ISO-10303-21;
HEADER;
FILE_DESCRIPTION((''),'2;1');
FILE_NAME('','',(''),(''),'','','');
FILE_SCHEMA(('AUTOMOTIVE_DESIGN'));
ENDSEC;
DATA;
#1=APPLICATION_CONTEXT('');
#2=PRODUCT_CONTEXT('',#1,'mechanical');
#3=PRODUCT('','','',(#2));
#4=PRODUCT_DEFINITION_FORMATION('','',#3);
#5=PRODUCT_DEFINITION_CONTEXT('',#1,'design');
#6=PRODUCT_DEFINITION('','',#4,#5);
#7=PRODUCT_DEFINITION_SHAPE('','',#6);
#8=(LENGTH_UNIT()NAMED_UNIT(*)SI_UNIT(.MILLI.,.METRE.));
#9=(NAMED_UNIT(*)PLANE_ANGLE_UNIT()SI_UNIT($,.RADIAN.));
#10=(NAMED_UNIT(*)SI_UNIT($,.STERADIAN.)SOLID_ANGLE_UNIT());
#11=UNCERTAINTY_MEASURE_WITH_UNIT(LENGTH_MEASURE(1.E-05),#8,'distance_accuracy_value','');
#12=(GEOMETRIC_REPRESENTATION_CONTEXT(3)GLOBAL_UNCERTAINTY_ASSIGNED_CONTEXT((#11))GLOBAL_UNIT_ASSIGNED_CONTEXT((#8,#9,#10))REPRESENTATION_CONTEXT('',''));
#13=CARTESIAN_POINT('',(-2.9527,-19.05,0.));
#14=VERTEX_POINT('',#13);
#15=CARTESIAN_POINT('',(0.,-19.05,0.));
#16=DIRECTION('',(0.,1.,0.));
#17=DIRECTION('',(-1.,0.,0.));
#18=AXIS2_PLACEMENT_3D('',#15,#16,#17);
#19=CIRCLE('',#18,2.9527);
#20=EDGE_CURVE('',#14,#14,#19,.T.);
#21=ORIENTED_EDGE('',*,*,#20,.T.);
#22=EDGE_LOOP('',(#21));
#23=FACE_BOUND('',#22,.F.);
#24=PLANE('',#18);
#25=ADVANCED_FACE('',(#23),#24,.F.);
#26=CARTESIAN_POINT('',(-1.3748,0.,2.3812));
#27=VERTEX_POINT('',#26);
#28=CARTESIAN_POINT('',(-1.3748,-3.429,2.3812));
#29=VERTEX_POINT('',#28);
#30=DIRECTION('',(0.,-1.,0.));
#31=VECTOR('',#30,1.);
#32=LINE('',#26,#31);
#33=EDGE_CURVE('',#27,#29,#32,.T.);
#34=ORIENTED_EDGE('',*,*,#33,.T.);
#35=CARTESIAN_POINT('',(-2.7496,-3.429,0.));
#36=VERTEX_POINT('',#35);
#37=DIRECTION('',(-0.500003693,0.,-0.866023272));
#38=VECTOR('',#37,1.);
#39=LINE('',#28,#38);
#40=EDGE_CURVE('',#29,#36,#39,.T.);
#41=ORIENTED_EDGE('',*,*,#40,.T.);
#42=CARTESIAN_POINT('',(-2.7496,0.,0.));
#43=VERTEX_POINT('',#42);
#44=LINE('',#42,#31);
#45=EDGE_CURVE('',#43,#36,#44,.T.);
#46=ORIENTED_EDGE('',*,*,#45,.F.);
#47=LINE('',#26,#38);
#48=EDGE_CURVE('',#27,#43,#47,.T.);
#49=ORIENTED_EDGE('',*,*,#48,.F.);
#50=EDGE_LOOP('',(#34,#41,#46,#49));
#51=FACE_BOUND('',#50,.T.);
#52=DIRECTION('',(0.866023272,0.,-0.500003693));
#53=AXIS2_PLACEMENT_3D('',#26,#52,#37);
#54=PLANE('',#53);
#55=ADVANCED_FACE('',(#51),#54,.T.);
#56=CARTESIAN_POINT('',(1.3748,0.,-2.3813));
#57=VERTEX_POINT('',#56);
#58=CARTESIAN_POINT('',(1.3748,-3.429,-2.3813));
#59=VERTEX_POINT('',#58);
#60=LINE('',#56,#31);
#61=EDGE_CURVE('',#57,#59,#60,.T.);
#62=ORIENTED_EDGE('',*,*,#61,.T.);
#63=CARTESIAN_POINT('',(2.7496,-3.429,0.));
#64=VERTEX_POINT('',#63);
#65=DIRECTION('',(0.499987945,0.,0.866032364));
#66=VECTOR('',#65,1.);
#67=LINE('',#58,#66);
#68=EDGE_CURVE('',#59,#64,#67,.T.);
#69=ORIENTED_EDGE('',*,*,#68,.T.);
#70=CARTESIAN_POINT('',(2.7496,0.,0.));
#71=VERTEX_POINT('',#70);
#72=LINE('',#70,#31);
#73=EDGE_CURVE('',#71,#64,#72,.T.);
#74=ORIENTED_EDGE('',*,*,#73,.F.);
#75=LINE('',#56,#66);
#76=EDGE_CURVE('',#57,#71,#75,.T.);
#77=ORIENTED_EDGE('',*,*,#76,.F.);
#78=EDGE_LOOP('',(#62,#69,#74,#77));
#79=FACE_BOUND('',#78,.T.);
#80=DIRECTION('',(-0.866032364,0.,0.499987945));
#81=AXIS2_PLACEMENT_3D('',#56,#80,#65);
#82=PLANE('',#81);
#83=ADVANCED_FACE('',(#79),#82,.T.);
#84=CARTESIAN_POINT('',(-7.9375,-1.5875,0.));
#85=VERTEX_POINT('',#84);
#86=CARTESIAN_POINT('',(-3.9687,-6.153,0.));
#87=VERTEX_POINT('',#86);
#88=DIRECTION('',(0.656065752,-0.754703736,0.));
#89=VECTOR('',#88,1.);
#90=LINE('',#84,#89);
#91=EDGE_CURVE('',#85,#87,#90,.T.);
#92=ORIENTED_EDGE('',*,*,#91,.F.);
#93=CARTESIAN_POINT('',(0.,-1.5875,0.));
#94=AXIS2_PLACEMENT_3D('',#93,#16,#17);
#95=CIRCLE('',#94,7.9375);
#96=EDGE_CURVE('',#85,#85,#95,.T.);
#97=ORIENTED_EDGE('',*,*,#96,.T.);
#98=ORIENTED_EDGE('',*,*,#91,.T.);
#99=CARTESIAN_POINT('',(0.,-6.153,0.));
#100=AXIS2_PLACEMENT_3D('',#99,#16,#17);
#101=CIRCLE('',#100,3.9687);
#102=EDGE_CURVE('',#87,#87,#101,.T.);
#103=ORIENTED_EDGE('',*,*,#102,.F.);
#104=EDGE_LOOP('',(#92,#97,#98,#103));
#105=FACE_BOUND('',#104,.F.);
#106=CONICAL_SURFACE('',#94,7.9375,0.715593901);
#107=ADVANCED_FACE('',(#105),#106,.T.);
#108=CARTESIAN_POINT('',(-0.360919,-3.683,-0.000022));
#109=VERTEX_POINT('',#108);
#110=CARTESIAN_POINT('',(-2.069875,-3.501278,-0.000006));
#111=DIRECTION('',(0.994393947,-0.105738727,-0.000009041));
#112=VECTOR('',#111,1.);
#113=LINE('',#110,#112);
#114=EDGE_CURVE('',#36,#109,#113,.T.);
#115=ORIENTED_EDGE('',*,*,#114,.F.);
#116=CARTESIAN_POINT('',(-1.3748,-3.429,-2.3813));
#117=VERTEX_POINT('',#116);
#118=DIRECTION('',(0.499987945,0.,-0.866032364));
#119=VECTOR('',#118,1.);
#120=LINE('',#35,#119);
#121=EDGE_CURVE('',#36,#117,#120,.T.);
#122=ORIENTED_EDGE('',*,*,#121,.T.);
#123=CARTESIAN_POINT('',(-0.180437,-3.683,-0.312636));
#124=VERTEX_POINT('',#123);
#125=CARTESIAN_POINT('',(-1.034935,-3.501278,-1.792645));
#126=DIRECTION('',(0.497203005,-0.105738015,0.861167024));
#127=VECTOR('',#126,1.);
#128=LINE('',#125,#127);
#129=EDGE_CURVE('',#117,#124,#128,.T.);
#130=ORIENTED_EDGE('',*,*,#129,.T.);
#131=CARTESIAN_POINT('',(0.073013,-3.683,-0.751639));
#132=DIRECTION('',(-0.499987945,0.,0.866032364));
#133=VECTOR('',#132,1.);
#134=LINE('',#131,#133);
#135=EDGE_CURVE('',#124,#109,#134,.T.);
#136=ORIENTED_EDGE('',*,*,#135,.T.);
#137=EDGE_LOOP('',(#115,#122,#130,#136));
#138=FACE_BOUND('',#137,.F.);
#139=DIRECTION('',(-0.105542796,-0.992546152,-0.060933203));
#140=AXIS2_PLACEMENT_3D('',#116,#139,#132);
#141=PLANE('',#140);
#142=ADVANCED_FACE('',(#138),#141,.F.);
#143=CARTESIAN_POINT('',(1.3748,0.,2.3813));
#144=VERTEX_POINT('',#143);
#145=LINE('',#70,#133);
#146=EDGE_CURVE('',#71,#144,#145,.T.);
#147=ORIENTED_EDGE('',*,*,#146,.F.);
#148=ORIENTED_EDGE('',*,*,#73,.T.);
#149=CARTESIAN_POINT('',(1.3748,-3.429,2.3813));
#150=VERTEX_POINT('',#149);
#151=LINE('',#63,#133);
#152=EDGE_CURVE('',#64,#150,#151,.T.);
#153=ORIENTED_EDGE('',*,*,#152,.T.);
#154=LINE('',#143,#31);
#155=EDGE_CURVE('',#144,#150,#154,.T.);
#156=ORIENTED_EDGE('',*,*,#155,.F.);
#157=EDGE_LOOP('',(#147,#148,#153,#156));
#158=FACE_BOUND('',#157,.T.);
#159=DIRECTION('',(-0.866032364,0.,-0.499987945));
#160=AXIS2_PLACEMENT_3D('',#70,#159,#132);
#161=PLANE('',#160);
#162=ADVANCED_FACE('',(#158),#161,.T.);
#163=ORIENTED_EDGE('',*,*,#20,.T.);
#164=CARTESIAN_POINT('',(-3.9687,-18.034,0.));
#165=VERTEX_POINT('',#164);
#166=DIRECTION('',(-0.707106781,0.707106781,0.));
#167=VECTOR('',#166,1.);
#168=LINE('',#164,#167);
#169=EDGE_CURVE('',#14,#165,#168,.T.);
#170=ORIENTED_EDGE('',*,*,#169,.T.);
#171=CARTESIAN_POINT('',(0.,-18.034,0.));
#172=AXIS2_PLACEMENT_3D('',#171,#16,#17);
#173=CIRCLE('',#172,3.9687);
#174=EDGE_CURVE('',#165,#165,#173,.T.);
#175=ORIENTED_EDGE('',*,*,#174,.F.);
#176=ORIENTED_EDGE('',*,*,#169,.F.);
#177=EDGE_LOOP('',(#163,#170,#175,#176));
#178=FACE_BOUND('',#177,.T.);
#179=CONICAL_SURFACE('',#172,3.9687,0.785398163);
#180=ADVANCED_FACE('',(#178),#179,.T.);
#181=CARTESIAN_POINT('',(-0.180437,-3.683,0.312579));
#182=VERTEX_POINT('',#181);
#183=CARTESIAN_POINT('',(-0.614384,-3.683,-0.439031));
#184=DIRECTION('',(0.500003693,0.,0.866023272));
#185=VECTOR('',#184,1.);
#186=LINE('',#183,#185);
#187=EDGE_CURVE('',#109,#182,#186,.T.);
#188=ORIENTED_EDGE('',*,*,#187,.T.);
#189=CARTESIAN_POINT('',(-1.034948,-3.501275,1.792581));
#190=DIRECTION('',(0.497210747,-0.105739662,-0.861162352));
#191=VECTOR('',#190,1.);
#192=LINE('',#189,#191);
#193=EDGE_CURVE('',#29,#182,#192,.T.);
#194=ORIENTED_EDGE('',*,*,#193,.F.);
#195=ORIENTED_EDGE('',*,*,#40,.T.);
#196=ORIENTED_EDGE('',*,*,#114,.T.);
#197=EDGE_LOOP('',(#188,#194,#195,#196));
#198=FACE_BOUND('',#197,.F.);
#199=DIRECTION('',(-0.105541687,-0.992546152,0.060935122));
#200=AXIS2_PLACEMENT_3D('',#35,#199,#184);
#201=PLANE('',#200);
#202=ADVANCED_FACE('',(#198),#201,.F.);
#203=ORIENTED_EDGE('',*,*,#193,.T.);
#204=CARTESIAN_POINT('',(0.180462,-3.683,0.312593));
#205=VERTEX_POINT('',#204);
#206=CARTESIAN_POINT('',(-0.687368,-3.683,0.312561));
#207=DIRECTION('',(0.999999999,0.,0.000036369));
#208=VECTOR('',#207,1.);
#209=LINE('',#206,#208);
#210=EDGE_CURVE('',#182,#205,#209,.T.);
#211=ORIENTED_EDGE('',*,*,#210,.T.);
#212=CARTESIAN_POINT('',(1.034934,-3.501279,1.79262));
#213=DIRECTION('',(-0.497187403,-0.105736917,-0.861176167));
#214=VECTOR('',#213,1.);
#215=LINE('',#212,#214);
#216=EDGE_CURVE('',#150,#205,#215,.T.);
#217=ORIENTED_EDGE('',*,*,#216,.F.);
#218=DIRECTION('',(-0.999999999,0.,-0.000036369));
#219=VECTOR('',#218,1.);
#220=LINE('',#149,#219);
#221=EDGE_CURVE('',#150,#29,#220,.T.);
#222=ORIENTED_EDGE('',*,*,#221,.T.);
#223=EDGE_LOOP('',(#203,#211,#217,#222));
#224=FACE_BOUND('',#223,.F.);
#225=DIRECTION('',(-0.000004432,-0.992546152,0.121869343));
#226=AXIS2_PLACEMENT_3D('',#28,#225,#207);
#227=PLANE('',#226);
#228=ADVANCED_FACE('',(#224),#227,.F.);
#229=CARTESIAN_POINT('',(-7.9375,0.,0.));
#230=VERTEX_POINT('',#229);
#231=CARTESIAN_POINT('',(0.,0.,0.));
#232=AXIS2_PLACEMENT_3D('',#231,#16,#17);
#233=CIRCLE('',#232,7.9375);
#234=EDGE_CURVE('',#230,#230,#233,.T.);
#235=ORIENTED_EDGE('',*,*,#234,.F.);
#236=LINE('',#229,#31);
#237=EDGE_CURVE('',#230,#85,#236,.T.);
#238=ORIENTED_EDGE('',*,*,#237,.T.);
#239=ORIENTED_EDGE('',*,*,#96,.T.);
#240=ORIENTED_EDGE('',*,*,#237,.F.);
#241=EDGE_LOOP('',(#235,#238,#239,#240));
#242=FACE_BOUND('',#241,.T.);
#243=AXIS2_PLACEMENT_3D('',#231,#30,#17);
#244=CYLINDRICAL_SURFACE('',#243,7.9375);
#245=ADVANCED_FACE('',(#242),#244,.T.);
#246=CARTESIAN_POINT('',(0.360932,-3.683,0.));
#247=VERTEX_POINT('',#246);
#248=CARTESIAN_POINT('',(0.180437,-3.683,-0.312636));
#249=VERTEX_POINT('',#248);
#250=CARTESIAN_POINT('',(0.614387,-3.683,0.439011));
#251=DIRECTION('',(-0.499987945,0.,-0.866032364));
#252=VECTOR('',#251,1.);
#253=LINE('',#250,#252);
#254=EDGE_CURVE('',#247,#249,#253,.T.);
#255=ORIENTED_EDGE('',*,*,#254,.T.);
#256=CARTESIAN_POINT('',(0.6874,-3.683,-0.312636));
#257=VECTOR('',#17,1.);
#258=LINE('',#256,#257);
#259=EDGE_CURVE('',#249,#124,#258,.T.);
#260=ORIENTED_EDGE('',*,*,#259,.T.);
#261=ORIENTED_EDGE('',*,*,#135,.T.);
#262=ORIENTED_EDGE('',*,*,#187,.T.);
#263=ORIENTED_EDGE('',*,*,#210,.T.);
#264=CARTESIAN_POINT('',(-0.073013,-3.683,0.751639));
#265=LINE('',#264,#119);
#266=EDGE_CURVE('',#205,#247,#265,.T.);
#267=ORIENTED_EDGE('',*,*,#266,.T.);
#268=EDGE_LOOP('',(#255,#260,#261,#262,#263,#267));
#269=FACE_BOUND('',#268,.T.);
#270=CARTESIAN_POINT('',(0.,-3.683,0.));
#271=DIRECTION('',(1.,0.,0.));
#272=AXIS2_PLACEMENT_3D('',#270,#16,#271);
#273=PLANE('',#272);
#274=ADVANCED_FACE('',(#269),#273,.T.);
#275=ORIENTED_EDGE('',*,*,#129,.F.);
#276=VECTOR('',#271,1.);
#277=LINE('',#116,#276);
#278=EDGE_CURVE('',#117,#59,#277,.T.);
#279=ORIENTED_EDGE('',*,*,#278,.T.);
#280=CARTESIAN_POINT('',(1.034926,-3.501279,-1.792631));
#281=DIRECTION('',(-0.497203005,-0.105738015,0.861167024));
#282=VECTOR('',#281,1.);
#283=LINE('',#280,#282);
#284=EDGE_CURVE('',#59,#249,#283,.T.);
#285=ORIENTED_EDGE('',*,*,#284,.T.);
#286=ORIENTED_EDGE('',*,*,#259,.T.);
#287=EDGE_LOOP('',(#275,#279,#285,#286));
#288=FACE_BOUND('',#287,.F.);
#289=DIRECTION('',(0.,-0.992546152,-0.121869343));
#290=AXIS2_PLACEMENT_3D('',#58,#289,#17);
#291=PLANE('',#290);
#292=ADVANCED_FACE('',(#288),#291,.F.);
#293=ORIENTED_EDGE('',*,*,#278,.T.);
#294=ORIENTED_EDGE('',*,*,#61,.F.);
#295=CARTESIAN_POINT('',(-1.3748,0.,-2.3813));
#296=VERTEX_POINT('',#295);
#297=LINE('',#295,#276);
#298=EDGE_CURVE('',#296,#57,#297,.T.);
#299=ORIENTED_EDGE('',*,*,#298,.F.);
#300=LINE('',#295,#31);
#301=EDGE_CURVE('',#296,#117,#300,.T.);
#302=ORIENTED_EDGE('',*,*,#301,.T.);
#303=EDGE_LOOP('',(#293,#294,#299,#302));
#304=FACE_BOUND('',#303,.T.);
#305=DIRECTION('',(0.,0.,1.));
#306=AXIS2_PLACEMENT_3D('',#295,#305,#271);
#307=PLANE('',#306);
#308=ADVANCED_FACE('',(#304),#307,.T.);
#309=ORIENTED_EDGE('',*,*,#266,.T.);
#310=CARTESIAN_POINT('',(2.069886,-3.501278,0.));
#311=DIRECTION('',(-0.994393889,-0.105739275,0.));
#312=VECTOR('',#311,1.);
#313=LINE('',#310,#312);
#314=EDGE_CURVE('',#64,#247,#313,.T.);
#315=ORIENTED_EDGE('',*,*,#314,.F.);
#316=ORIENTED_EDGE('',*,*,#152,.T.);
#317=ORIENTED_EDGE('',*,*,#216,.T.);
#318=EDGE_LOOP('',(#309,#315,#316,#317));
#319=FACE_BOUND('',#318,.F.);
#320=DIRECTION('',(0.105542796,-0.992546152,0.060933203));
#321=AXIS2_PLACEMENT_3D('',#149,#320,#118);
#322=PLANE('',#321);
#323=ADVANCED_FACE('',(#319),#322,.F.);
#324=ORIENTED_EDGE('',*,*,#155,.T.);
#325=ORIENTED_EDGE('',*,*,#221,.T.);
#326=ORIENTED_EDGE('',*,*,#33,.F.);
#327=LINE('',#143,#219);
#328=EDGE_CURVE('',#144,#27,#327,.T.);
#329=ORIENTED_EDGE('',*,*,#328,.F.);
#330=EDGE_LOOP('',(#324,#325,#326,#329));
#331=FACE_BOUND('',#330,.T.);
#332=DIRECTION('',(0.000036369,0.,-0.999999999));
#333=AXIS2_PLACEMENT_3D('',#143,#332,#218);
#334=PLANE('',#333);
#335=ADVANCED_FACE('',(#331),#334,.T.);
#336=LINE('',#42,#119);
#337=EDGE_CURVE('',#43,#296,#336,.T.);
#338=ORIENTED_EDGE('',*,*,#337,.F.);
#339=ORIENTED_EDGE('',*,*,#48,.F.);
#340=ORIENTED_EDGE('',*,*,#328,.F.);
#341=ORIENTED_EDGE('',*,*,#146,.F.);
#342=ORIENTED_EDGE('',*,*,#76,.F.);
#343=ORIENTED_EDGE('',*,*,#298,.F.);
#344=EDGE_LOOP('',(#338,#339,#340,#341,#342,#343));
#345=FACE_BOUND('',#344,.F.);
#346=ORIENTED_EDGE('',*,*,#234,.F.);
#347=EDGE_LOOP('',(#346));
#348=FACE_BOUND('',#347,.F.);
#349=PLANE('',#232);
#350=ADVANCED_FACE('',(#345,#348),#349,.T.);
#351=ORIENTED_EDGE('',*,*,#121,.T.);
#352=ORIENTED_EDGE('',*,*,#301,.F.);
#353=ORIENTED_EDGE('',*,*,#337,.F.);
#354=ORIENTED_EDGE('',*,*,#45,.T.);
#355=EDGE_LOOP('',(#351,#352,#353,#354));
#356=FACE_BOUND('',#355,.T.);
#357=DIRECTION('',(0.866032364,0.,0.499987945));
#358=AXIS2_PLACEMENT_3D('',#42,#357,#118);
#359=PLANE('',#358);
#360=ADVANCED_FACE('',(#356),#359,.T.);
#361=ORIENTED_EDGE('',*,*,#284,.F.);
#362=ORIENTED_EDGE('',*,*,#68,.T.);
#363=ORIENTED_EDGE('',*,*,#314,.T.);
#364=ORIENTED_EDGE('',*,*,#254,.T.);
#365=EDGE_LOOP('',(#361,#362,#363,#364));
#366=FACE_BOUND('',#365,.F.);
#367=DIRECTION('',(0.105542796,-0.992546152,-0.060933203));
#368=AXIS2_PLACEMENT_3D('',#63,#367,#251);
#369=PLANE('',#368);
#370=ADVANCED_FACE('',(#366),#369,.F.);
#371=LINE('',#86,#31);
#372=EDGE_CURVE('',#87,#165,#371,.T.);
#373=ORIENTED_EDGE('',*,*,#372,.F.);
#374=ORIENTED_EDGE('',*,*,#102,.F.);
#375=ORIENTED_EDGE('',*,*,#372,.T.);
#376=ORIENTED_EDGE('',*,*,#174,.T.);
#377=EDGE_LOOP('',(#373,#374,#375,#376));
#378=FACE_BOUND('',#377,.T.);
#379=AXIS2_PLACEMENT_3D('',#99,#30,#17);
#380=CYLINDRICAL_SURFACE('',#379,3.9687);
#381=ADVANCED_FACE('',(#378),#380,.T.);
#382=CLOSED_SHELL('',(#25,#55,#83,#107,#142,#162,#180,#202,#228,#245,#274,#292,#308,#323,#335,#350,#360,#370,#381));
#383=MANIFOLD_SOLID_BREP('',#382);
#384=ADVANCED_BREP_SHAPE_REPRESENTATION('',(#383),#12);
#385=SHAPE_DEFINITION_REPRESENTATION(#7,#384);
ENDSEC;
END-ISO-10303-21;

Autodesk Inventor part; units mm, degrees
ref_plane "YZ Plane" through (0, 0, 0) normal (1, 0, 0) x (0, 1, 0)
ref_plane "XZ Plane" through (0, 0, 0) normal (0, 1, 0) x (-1, 0, 0)
ref_plane "XY Plane" through (0, 0, 0) normal (0, 0, 1) x (1, 0, 0)
sketch "Sketch1" plane through (0, 0, 0) normal (0, 0, 1) x (1, 0, 0)
  line L0 (0, 0) -> (-7.9375, 0)
  line L1 (-7.9375, 0) -> (-7.9375, -1.5875)
  line L2 (-7.9375, -1.5875) -> (-3.9687, -6.153)
  line L3 (-3.9687, -6.153) -> (-3.9687, -19.05)
  line L4 (-3.9687, -19.05) -> (0, -19.05)
  line L5 (0, -19.05) -> (0, 0)
  dimension "d0" = 15.875
  dimension "d1" = 1.5875
  dimension "d2" = 19.05
  dimension "d3" = 7.9375
  dimension "d16" = 41
revolve "Revolution1" add sketch "Sketch1" angle 360 about axis through (0, -19.05, 0) along (0, 1, 0)
chamfer "Chamfer1" distance 1.016 angle 45 1 edges at (3.9688, -19.05, 0)
thread "Thread1" size "5/16-18 UNC" class "2A" standard "ANSI Unified Screw Threads" full length
sketch "Sketch2" plane through (0, 0, 0) normal (0, 1, 0) x (1, 0, 0)
  circle A0 centre (0, 0) radius 7.9375 projected
  line L0 (-1.3748, -2.3812) -> (-2.7496, 0)
  line L1 (-2.7496, 0) -> (-1.3748, 2.3813)
  line L2 (-1.3748, 2.3813) -> (1.3748, 2.3813)
  line L3 (1.3748, 2.3813) -> (2.7496, 0)
  line L4 (2.7496, 0) -> (1.3748, -2.3813)
  line L5 (1.3748, -2.3813) -> (-1.3748, -2.3812)
  dimension "d11" = 4.7625
extrude "Extrusion1" cut sketch "Sketch2" against normal blind 3.429 contours L0 L1 L2 L3 L4 L5
sketch "Sketch3" plane through (0, -3.429, 0) normal (0, 1, 0) x (1, 0, 0)
  line L0 (-1.3748, -2.3812) -> (1.3748, -2.3813) projected
  line L1 (1.3748, -2.3813) -> (2.7496, 0) projected
  line L2 (2.7496, 0) -> (1.3748, 2.3813) projected
  line L3 (1.3748, 2.3813) -> (-1.3748, 2.3813) projected
  line L4 (-1.3748, 2.3813) -> (-2.7496, 0) projected
  line L5 (-2.7496, 0) -> (-1.3748, -2.3812) projected
  point P0 (0, 0)
extrude "Extrusion2" cut sketch "Sketch3" against normal blind 0.254 draft -83
